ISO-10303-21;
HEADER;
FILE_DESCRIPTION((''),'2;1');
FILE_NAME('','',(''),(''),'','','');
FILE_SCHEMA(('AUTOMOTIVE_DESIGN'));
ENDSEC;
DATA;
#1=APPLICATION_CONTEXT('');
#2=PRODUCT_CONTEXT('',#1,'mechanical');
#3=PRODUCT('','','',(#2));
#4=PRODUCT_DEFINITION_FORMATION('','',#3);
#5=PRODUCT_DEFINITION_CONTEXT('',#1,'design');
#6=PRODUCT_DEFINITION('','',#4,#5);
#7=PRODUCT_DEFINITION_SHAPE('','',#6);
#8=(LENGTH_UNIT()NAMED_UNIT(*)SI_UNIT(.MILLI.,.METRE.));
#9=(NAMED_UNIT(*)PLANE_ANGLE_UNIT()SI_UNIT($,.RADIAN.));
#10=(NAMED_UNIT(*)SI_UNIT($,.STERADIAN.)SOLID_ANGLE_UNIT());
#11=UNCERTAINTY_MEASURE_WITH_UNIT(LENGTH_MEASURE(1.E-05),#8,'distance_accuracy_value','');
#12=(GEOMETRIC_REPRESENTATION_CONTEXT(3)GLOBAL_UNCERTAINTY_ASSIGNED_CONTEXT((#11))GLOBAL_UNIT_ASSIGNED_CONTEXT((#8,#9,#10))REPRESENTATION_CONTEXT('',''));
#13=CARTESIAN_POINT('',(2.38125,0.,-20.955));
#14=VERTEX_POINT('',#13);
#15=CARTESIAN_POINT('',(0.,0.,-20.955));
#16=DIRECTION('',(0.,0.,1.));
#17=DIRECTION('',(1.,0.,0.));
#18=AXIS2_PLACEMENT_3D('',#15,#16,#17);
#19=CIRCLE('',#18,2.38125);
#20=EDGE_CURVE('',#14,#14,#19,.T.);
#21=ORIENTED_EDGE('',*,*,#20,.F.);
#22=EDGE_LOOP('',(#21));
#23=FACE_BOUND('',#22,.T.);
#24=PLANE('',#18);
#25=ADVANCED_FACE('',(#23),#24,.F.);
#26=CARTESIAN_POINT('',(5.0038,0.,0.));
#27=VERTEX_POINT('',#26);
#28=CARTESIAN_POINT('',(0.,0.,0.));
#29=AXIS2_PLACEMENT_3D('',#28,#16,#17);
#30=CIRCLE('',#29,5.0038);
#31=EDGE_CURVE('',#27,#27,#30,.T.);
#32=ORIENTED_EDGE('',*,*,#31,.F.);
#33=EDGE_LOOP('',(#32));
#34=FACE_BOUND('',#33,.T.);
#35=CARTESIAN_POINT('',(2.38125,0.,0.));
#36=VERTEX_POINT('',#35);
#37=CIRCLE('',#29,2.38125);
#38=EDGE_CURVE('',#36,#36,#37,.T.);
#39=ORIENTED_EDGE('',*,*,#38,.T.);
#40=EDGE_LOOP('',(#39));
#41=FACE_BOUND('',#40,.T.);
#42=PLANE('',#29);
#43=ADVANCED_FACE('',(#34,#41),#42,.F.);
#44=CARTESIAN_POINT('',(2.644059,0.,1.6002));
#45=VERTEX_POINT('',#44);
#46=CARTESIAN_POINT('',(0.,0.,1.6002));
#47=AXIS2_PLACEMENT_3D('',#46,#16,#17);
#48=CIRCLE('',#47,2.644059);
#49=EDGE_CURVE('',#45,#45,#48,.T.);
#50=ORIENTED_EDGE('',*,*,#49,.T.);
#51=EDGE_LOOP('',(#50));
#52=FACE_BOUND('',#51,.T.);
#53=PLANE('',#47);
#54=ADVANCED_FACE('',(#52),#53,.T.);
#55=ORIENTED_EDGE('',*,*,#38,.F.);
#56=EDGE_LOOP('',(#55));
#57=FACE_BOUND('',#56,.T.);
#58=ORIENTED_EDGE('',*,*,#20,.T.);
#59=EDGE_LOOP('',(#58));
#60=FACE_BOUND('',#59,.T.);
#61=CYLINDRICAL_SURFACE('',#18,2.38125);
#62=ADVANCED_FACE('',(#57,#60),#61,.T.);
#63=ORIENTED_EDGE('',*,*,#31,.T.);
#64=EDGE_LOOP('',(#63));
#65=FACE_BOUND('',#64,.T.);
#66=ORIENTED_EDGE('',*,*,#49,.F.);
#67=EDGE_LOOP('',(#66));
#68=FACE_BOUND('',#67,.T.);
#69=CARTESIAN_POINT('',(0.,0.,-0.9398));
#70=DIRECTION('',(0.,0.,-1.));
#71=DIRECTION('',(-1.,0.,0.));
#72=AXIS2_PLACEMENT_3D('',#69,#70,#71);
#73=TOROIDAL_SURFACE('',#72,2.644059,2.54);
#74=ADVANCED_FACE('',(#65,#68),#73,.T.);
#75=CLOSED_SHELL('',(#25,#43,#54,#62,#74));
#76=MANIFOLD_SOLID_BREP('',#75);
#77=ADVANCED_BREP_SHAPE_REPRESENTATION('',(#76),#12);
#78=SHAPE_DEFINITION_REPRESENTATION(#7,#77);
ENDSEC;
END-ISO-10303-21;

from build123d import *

# Parameters (mm, degrees)
SKETCH1_R           = 5.0038
BOSS_EXTRUDE1_DEPTH = 1.6002
SKETCH2_R           = 2.38125
BOSS_EXTRUDE2_DEPTH = 20.955
FILLET1_R           = 2.54


with BuildPart() as part:
    # Sketch1 → Boss-Extrude1 (new body)
    with BuildSketch(Plane.XY):
        Circle(SKETCH1_R)
    extrude(amount=BOSS_EXTRUDE1_DEPTH)

    # Sketch2 → Boss-Extrude2 (add)
    with BuildSketch(Plane.XY):
        Circle(SKETCH2_R)
    extrude(amount=-BOSS_EXTRUDE2_DEPTH)

    # Fillet1
    # the kernel refuses this fillet: 2.54 mm, written as the material it takes off along each edge
    with BuildSketch(Plane(origin=(0, 0, 1.6002), x_dir=(1, 0, 0), z_dir=(0, -1, 0))) as fillet1_piece_1:
        with BuildLine():
            CenterArc((2.644059345, -2.54), FILLET1_R, 21.715617283, 68.284382717)
            Line((2.644059345, 0), (2.644059345, 0.0508))
            Line((2.644059345, 0.0508), (5.0038, 0.0508))
            Line((5.0038, 0.0508), (5.0546, 0))
            ThreePointArc((5.0546, 0), (5.0546, -0.8001), (5.050994813, -1.581404))
            Line((5.050994813, -1.581404), (5.0038, -1.6002))
        make_face()
    revolve(axis=Axis((0, 0, 1.6002), (0, 0, 1)), mode=Mode.SUBTRACT)


solid = part.part
